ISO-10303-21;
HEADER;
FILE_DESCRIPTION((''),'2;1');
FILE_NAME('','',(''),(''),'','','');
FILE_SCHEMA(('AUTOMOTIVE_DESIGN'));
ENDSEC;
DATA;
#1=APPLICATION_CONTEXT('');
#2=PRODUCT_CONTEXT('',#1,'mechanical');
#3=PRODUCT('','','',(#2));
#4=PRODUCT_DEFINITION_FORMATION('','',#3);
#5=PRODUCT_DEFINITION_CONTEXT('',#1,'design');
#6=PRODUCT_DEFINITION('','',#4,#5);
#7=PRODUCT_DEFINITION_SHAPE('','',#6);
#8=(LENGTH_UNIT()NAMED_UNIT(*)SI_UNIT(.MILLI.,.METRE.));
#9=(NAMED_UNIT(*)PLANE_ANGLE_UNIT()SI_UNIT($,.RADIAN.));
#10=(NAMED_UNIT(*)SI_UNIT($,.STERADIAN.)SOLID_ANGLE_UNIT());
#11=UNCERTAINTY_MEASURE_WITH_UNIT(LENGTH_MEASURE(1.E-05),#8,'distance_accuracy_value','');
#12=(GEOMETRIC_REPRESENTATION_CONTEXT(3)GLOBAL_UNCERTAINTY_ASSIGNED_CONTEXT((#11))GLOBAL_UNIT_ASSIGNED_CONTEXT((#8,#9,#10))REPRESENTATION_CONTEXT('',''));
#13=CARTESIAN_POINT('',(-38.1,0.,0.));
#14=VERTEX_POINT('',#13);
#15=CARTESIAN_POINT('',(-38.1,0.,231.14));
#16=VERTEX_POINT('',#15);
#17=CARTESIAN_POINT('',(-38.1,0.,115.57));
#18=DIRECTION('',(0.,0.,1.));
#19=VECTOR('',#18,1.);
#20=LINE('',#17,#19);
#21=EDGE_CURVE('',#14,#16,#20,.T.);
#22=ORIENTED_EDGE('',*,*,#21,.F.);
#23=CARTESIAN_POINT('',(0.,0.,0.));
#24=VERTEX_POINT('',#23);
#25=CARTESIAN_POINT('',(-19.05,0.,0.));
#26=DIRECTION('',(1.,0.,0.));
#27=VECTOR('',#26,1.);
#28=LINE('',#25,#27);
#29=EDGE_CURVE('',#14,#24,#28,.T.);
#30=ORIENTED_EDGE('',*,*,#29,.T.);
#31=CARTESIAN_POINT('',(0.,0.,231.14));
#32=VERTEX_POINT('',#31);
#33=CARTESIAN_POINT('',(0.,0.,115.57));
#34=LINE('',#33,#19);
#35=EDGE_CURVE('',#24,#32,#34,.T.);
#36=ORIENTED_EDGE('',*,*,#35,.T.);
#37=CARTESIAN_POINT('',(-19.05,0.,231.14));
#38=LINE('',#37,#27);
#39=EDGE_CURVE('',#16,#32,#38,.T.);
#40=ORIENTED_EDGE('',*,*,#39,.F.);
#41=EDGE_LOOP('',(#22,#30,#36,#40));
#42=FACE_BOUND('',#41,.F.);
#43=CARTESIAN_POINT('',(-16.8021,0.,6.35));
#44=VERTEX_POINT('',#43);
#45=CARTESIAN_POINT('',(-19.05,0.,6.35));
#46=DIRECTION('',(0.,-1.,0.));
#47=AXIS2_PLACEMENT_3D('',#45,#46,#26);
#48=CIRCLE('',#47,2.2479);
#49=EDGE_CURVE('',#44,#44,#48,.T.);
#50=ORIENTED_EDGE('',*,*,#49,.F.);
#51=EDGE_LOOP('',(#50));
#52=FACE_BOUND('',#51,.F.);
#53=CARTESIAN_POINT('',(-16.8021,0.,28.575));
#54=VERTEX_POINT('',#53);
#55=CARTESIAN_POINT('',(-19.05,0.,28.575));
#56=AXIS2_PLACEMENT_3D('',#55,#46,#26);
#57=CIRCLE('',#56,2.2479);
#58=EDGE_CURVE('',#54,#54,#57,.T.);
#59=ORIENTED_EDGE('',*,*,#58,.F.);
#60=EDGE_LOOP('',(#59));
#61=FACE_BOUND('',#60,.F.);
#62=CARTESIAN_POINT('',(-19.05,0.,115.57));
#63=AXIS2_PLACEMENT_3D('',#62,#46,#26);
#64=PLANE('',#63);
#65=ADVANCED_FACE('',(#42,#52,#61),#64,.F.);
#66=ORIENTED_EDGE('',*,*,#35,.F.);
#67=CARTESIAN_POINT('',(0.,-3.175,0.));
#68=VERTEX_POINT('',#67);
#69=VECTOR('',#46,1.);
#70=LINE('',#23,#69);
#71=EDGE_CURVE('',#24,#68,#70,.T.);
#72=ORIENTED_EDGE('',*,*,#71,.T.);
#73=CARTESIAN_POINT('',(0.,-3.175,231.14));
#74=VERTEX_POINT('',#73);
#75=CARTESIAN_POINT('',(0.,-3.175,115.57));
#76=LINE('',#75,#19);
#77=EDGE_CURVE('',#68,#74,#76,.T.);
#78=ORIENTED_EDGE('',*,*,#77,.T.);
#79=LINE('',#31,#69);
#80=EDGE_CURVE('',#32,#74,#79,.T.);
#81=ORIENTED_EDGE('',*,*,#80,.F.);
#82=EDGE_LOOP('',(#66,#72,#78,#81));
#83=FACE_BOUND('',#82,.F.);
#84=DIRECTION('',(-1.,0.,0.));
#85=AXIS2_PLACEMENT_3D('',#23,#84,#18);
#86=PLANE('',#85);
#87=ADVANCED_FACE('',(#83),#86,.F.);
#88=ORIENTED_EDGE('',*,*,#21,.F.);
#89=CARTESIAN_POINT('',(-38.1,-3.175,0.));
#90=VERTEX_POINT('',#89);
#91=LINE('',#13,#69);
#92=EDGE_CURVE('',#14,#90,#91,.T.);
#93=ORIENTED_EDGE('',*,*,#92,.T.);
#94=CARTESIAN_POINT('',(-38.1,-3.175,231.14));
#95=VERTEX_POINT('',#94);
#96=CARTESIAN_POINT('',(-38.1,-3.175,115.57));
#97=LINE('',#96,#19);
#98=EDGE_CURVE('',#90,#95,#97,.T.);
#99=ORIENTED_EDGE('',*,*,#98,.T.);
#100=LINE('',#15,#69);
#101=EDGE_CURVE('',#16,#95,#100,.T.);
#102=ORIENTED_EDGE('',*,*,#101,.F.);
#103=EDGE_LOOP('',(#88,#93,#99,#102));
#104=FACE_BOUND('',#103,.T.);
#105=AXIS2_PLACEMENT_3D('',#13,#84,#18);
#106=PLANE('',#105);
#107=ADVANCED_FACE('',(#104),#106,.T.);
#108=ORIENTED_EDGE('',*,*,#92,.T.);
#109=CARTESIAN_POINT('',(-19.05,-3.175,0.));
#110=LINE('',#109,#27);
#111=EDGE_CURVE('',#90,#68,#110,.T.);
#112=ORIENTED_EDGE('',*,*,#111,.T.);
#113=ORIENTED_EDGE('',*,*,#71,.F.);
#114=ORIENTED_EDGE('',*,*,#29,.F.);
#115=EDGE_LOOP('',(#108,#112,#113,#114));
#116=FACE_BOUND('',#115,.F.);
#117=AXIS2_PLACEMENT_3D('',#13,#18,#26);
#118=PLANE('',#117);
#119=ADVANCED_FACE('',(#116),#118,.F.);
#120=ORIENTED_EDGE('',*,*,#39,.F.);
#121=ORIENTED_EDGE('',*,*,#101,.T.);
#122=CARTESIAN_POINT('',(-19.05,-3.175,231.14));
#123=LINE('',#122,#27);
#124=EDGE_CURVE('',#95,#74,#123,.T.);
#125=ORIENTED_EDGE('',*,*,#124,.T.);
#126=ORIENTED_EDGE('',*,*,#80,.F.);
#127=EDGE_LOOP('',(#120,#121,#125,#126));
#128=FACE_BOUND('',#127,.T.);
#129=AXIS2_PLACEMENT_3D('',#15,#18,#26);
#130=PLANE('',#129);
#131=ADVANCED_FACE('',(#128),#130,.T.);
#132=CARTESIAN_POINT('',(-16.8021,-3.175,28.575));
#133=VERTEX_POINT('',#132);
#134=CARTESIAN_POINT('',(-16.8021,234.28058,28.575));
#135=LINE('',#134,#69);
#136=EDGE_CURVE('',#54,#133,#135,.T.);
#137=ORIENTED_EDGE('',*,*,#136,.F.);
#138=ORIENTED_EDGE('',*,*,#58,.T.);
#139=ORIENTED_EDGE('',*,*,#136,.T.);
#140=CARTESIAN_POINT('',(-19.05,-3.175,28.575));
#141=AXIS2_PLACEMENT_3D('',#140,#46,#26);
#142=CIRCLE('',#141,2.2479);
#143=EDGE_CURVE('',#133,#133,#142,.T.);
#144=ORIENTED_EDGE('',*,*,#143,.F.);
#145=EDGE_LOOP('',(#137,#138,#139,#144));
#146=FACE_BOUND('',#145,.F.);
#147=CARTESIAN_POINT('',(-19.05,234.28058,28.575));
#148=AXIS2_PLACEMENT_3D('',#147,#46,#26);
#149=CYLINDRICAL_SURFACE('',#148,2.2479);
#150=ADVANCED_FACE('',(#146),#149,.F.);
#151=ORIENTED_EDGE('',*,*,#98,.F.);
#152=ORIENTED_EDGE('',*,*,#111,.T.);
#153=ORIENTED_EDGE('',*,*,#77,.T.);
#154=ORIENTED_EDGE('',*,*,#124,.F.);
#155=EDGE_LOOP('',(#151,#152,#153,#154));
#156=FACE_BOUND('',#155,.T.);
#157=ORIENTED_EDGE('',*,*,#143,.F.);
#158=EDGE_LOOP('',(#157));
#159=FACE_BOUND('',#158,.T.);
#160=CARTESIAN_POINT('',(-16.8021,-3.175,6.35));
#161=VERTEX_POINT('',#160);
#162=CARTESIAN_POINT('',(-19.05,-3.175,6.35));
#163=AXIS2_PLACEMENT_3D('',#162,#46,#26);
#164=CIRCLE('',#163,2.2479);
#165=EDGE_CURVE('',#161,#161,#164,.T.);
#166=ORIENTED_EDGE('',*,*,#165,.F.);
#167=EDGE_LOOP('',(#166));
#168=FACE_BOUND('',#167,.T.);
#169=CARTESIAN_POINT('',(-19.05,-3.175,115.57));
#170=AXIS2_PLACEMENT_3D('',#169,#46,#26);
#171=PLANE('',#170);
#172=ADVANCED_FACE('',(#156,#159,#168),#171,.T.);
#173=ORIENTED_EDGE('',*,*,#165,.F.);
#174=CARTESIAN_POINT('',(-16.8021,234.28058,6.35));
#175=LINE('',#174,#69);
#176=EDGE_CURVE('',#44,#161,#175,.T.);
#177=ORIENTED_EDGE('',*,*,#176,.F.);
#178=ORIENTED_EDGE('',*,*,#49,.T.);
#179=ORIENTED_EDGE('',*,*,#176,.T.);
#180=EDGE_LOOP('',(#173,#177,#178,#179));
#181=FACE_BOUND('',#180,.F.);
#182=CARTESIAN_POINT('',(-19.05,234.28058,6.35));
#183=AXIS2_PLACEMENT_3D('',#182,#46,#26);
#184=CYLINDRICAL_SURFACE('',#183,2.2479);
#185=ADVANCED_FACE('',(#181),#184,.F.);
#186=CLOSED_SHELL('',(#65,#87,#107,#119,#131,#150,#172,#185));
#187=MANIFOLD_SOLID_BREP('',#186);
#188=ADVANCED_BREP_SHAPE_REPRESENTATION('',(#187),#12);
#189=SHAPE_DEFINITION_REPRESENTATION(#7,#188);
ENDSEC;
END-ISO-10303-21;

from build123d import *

# Parameters (mm, degrees)
F0_W     = 38.1
F0_H     = 231.14
F1_DEPTH = 3.175
F3_D     = 4.4958


# Not quite as in the source:
# - a length typed as a fraction of an inch, garbled in the dataset ("3 / 203.2 mm" for 3/8 in), is restored


with BuildPart() as f1:
    # F0 (on Front) → F1 (new body)
    with BuildSketch(Plane.XZ):
        with Locations((-19.05, 115.57)):
            Rectangle(F0_W, F0_H)
    extrude(amount=F1_DEPTH)

    # F3 (through all)
    with Locations(Plane(origin=(0, 0, 0), x_dir=(-1, 0, 0), z_dir=(0, 1, 0))):
        with Locations((19.05, 6.35), (19.05, 28.575)):
            Hole(F3_D / 2)


solid = f1.part
